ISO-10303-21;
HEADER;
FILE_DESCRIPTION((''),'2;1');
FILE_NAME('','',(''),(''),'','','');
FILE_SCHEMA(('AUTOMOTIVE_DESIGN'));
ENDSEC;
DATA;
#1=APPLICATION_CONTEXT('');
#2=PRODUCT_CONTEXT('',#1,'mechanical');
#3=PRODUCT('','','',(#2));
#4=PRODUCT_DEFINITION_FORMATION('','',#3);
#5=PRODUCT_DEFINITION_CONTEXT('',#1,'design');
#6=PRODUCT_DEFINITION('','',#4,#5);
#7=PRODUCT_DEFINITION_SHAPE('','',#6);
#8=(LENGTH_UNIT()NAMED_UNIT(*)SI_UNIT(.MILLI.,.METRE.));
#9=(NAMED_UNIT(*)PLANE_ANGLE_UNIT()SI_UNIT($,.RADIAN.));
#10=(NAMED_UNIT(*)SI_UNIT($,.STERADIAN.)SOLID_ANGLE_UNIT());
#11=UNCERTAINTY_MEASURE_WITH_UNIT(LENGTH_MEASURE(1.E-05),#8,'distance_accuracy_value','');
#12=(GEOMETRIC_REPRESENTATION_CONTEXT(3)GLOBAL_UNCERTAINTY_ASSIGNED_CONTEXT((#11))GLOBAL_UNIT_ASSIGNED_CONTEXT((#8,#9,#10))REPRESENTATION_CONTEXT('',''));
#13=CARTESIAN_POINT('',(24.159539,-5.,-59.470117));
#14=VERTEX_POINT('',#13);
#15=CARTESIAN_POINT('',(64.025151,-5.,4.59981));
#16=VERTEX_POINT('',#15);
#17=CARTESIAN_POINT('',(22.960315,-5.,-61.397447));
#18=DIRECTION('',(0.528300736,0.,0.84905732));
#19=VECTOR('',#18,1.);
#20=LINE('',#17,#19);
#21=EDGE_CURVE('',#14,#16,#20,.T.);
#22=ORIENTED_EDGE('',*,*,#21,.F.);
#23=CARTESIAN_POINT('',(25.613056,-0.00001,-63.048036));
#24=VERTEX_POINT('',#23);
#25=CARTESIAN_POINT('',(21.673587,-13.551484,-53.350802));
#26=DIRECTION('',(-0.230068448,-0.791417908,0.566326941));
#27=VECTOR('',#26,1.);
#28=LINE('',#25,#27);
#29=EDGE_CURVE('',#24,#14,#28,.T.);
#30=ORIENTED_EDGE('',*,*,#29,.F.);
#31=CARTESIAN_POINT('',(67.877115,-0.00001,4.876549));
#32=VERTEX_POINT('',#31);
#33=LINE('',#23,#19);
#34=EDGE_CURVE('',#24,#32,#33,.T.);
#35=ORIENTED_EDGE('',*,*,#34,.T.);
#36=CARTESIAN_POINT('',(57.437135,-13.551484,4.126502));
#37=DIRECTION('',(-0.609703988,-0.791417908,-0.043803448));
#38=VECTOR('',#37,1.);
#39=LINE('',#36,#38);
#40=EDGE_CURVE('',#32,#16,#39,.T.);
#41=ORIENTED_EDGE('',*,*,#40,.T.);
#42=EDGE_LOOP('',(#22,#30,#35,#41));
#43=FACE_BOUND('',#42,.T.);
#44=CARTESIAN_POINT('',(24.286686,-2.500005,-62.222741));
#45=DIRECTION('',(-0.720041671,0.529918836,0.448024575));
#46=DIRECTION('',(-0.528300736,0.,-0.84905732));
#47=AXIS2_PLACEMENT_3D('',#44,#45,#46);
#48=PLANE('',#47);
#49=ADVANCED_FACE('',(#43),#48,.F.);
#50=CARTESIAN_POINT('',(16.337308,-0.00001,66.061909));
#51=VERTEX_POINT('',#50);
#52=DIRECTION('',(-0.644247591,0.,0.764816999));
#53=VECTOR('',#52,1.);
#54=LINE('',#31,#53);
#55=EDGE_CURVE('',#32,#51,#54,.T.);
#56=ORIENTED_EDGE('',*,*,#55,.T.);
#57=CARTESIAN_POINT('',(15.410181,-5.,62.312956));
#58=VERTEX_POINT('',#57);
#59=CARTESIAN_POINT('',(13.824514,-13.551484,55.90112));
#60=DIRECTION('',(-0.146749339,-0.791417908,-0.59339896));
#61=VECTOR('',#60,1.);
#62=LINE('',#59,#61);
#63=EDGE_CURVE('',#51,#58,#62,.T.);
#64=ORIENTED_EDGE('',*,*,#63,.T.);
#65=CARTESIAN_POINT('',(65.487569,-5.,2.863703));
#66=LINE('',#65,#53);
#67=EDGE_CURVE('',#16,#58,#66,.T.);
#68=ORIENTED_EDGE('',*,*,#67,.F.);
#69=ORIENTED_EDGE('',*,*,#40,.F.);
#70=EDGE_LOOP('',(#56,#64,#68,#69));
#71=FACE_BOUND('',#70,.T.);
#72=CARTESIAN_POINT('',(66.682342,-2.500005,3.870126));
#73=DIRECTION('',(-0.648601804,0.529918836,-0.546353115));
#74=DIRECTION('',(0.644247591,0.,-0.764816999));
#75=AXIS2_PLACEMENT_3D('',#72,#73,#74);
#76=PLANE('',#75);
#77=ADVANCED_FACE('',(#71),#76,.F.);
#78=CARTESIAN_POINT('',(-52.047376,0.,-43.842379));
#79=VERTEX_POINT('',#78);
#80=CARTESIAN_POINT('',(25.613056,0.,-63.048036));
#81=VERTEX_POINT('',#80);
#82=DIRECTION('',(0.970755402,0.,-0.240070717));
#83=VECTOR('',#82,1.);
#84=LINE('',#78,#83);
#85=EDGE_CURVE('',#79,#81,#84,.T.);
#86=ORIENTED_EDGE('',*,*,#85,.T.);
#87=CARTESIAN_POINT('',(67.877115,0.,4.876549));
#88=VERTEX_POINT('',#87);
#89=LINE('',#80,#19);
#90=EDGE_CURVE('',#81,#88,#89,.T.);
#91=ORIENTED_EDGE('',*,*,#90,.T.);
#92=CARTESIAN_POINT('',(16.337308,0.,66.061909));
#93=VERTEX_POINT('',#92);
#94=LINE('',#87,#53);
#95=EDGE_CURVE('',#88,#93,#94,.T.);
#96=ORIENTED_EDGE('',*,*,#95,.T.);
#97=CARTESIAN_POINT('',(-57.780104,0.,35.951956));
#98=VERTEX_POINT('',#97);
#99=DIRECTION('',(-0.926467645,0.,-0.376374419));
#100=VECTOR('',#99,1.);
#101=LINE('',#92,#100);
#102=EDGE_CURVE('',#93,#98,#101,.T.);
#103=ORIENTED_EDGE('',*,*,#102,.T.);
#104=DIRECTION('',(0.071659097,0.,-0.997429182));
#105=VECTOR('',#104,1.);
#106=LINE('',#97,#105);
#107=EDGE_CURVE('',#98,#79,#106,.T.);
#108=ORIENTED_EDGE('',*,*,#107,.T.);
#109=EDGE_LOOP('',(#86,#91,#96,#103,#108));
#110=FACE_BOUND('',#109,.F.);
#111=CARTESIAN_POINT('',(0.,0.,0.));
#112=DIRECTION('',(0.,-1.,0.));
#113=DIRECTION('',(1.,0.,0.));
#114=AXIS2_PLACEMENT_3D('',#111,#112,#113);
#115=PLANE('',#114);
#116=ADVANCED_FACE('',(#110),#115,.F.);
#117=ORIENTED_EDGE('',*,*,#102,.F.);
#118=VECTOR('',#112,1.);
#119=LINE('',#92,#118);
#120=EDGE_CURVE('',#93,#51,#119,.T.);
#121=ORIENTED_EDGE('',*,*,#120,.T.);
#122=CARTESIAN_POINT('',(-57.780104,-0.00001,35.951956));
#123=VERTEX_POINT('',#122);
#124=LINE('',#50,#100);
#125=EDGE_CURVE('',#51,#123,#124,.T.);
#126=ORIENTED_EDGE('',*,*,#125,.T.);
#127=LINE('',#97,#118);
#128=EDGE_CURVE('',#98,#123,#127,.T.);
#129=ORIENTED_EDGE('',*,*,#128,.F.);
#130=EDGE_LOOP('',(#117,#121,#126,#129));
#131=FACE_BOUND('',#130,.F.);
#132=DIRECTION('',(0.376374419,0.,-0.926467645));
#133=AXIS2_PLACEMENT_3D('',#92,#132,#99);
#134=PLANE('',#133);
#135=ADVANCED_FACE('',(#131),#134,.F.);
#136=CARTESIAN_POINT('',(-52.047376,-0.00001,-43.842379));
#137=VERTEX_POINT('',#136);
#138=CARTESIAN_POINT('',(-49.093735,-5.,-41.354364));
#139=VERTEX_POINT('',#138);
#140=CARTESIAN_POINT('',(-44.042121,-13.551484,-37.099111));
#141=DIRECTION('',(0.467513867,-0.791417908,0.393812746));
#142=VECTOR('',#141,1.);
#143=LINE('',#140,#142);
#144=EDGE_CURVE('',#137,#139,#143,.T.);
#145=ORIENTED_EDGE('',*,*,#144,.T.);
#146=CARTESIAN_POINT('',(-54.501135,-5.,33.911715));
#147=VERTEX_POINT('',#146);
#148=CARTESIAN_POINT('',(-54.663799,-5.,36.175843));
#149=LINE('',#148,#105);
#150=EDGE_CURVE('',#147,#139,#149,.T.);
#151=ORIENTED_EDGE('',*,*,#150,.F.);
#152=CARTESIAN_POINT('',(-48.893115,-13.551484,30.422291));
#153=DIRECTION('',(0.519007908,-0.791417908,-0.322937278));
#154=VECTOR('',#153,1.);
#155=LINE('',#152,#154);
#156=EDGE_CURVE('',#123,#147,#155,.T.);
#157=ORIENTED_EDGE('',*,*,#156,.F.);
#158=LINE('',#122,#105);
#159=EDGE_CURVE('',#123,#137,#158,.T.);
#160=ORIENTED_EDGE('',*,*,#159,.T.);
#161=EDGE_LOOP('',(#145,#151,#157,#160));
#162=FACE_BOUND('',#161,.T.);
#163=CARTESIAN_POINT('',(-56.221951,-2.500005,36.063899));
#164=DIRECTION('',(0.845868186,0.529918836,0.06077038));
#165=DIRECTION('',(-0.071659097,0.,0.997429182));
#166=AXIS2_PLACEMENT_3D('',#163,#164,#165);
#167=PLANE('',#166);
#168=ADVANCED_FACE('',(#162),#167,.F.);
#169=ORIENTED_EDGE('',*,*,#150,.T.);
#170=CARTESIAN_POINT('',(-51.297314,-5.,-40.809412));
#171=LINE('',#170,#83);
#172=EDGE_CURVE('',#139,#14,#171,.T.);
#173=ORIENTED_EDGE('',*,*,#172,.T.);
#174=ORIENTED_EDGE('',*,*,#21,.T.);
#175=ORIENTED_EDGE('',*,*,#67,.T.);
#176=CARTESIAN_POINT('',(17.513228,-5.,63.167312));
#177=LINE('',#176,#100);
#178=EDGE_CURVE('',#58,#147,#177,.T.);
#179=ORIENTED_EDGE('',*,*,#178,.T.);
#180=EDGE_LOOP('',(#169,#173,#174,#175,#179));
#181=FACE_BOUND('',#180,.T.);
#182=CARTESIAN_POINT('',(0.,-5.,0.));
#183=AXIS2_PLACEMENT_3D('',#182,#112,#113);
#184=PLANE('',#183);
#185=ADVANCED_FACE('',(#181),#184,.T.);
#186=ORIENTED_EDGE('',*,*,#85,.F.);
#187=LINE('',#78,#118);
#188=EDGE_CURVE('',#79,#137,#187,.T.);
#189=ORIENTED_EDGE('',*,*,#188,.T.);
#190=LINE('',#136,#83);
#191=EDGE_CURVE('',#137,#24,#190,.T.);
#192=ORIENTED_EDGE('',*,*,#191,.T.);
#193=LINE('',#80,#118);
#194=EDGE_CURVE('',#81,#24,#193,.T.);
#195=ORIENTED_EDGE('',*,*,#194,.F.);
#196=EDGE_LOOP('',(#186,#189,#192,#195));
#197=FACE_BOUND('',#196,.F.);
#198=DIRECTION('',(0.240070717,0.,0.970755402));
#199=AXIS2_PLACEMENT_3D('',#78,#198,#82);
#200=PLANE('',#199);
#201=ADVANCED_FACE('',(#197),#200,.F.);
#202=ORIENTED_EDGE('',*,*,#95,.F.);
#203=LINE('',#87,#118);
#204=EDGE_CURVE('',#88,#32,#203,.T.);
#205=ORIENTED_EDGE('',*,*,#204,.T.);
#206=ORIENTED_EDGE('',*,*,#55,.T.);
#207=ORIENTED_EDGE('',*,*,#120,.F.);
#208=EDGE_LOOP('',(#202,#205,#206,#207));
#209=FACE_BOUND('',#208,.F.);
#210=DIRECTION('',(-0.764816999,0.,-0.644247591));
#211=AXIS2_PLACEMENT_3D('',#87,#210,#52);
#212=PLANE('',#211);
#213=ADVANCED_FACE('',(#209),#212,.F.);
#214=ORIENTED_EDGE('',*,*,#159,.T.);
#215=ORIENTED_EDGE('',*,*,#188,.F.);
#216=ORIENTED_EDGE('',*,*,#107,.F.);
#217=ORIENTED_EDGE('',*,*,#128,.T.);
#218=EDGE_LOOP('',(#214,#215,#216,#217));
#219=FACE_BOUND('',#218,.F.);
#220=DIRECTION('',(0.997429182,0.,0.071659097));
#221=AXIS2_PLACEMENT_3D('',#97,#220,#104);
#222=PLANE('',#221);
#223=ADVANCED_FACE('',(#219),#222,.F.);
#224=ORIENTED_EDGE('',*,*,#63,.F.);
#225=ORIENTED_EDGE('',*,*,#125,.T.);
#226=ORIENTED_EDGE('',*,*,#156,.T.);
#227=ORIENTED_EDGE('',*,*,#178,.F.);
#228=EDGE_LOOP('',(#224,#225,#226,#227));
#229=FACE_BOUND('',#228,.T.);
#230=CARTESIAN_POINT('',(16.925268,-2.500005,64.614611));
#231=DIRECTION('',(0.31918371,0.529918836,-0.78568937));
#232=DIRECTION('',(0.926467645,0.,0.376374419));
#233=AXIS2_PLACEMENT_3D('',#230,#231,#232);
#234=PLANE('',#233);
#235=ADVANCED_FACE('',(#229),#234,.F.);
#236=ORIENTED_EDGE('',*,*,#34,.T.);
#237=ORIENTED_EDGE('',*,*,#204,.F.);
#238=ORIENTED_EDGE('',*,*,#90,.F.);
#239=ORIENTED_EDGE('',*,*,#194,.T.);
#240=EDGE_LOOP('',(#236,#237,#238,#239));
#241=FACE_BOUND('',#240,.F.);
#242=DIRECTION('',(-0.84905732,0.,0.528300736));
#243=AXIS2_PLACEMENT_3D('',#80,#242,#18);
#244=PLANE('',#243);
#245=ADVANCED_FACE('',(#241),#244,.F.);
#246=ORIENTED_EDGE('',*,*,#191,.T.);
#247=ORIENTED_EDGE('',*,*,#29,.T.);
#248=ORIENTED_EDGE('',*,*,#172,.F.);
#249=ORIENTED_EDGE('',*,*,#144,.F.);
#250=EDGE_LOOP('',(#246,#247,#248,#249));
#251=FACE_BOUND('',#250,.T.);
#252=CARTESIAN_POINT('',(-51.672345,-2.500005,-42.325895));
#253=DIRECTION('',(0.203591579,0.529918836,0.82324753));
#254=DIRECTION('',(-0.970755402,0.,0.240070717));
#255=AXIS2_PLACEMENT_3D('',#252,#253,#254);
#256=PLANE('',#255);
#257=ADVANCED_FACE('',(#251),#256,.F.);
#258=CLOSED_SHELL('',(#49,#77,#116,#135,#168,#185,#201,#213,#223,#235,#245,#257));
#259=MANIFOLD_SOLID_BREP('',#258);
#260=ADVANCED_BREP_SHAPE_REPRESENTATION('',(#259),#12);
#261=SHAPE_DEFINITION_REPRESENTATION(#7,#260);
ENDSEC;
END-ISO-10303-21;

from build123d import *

# Parameters (mm, degrees)
F1_DEPTH = 5
F2_SIZE2 = 3.124337
F2_SIZE  = 4.99999


# Not quite as in the source:
# - a fillet or chamfer is up to 0.001 mm smaller than in the source, because OpenCascade refuses the exact size


with BuildPart() as f1:
    # F0 (on Front) → F1 (new body)
    with BuildSketch(Plane.XZ):
        Polygon((-57.7801036188, 35.9519558773), (-52.0473758656, -43.8423787117), (25.6130563086, -63.0480360688), (67.8771152201, 4.8765494973), (16.3373079557, 66.061909406), align=None)
    extrude(amount=F1_DEPTH)

    # F2 (size 5 and 3.1243467595 in the source; OpenCascade refuses exactly that, so slightly less here)
    f2_edges = [f1.edges().sort_by_distance(p)[0] for p in [
        (-54.91374, -5, -3.945211),
        (-20.721398, -5, 51.006933),
        (42.107212, -5, 35.469229),
        (46.745086, -5, -29.085743),
        (-13.21716, -5, -53.445207),
    ]]
    chamfer(f2_edges, length=F2_SIZE, length2=F2_SIZE2)


solid = f1.part
